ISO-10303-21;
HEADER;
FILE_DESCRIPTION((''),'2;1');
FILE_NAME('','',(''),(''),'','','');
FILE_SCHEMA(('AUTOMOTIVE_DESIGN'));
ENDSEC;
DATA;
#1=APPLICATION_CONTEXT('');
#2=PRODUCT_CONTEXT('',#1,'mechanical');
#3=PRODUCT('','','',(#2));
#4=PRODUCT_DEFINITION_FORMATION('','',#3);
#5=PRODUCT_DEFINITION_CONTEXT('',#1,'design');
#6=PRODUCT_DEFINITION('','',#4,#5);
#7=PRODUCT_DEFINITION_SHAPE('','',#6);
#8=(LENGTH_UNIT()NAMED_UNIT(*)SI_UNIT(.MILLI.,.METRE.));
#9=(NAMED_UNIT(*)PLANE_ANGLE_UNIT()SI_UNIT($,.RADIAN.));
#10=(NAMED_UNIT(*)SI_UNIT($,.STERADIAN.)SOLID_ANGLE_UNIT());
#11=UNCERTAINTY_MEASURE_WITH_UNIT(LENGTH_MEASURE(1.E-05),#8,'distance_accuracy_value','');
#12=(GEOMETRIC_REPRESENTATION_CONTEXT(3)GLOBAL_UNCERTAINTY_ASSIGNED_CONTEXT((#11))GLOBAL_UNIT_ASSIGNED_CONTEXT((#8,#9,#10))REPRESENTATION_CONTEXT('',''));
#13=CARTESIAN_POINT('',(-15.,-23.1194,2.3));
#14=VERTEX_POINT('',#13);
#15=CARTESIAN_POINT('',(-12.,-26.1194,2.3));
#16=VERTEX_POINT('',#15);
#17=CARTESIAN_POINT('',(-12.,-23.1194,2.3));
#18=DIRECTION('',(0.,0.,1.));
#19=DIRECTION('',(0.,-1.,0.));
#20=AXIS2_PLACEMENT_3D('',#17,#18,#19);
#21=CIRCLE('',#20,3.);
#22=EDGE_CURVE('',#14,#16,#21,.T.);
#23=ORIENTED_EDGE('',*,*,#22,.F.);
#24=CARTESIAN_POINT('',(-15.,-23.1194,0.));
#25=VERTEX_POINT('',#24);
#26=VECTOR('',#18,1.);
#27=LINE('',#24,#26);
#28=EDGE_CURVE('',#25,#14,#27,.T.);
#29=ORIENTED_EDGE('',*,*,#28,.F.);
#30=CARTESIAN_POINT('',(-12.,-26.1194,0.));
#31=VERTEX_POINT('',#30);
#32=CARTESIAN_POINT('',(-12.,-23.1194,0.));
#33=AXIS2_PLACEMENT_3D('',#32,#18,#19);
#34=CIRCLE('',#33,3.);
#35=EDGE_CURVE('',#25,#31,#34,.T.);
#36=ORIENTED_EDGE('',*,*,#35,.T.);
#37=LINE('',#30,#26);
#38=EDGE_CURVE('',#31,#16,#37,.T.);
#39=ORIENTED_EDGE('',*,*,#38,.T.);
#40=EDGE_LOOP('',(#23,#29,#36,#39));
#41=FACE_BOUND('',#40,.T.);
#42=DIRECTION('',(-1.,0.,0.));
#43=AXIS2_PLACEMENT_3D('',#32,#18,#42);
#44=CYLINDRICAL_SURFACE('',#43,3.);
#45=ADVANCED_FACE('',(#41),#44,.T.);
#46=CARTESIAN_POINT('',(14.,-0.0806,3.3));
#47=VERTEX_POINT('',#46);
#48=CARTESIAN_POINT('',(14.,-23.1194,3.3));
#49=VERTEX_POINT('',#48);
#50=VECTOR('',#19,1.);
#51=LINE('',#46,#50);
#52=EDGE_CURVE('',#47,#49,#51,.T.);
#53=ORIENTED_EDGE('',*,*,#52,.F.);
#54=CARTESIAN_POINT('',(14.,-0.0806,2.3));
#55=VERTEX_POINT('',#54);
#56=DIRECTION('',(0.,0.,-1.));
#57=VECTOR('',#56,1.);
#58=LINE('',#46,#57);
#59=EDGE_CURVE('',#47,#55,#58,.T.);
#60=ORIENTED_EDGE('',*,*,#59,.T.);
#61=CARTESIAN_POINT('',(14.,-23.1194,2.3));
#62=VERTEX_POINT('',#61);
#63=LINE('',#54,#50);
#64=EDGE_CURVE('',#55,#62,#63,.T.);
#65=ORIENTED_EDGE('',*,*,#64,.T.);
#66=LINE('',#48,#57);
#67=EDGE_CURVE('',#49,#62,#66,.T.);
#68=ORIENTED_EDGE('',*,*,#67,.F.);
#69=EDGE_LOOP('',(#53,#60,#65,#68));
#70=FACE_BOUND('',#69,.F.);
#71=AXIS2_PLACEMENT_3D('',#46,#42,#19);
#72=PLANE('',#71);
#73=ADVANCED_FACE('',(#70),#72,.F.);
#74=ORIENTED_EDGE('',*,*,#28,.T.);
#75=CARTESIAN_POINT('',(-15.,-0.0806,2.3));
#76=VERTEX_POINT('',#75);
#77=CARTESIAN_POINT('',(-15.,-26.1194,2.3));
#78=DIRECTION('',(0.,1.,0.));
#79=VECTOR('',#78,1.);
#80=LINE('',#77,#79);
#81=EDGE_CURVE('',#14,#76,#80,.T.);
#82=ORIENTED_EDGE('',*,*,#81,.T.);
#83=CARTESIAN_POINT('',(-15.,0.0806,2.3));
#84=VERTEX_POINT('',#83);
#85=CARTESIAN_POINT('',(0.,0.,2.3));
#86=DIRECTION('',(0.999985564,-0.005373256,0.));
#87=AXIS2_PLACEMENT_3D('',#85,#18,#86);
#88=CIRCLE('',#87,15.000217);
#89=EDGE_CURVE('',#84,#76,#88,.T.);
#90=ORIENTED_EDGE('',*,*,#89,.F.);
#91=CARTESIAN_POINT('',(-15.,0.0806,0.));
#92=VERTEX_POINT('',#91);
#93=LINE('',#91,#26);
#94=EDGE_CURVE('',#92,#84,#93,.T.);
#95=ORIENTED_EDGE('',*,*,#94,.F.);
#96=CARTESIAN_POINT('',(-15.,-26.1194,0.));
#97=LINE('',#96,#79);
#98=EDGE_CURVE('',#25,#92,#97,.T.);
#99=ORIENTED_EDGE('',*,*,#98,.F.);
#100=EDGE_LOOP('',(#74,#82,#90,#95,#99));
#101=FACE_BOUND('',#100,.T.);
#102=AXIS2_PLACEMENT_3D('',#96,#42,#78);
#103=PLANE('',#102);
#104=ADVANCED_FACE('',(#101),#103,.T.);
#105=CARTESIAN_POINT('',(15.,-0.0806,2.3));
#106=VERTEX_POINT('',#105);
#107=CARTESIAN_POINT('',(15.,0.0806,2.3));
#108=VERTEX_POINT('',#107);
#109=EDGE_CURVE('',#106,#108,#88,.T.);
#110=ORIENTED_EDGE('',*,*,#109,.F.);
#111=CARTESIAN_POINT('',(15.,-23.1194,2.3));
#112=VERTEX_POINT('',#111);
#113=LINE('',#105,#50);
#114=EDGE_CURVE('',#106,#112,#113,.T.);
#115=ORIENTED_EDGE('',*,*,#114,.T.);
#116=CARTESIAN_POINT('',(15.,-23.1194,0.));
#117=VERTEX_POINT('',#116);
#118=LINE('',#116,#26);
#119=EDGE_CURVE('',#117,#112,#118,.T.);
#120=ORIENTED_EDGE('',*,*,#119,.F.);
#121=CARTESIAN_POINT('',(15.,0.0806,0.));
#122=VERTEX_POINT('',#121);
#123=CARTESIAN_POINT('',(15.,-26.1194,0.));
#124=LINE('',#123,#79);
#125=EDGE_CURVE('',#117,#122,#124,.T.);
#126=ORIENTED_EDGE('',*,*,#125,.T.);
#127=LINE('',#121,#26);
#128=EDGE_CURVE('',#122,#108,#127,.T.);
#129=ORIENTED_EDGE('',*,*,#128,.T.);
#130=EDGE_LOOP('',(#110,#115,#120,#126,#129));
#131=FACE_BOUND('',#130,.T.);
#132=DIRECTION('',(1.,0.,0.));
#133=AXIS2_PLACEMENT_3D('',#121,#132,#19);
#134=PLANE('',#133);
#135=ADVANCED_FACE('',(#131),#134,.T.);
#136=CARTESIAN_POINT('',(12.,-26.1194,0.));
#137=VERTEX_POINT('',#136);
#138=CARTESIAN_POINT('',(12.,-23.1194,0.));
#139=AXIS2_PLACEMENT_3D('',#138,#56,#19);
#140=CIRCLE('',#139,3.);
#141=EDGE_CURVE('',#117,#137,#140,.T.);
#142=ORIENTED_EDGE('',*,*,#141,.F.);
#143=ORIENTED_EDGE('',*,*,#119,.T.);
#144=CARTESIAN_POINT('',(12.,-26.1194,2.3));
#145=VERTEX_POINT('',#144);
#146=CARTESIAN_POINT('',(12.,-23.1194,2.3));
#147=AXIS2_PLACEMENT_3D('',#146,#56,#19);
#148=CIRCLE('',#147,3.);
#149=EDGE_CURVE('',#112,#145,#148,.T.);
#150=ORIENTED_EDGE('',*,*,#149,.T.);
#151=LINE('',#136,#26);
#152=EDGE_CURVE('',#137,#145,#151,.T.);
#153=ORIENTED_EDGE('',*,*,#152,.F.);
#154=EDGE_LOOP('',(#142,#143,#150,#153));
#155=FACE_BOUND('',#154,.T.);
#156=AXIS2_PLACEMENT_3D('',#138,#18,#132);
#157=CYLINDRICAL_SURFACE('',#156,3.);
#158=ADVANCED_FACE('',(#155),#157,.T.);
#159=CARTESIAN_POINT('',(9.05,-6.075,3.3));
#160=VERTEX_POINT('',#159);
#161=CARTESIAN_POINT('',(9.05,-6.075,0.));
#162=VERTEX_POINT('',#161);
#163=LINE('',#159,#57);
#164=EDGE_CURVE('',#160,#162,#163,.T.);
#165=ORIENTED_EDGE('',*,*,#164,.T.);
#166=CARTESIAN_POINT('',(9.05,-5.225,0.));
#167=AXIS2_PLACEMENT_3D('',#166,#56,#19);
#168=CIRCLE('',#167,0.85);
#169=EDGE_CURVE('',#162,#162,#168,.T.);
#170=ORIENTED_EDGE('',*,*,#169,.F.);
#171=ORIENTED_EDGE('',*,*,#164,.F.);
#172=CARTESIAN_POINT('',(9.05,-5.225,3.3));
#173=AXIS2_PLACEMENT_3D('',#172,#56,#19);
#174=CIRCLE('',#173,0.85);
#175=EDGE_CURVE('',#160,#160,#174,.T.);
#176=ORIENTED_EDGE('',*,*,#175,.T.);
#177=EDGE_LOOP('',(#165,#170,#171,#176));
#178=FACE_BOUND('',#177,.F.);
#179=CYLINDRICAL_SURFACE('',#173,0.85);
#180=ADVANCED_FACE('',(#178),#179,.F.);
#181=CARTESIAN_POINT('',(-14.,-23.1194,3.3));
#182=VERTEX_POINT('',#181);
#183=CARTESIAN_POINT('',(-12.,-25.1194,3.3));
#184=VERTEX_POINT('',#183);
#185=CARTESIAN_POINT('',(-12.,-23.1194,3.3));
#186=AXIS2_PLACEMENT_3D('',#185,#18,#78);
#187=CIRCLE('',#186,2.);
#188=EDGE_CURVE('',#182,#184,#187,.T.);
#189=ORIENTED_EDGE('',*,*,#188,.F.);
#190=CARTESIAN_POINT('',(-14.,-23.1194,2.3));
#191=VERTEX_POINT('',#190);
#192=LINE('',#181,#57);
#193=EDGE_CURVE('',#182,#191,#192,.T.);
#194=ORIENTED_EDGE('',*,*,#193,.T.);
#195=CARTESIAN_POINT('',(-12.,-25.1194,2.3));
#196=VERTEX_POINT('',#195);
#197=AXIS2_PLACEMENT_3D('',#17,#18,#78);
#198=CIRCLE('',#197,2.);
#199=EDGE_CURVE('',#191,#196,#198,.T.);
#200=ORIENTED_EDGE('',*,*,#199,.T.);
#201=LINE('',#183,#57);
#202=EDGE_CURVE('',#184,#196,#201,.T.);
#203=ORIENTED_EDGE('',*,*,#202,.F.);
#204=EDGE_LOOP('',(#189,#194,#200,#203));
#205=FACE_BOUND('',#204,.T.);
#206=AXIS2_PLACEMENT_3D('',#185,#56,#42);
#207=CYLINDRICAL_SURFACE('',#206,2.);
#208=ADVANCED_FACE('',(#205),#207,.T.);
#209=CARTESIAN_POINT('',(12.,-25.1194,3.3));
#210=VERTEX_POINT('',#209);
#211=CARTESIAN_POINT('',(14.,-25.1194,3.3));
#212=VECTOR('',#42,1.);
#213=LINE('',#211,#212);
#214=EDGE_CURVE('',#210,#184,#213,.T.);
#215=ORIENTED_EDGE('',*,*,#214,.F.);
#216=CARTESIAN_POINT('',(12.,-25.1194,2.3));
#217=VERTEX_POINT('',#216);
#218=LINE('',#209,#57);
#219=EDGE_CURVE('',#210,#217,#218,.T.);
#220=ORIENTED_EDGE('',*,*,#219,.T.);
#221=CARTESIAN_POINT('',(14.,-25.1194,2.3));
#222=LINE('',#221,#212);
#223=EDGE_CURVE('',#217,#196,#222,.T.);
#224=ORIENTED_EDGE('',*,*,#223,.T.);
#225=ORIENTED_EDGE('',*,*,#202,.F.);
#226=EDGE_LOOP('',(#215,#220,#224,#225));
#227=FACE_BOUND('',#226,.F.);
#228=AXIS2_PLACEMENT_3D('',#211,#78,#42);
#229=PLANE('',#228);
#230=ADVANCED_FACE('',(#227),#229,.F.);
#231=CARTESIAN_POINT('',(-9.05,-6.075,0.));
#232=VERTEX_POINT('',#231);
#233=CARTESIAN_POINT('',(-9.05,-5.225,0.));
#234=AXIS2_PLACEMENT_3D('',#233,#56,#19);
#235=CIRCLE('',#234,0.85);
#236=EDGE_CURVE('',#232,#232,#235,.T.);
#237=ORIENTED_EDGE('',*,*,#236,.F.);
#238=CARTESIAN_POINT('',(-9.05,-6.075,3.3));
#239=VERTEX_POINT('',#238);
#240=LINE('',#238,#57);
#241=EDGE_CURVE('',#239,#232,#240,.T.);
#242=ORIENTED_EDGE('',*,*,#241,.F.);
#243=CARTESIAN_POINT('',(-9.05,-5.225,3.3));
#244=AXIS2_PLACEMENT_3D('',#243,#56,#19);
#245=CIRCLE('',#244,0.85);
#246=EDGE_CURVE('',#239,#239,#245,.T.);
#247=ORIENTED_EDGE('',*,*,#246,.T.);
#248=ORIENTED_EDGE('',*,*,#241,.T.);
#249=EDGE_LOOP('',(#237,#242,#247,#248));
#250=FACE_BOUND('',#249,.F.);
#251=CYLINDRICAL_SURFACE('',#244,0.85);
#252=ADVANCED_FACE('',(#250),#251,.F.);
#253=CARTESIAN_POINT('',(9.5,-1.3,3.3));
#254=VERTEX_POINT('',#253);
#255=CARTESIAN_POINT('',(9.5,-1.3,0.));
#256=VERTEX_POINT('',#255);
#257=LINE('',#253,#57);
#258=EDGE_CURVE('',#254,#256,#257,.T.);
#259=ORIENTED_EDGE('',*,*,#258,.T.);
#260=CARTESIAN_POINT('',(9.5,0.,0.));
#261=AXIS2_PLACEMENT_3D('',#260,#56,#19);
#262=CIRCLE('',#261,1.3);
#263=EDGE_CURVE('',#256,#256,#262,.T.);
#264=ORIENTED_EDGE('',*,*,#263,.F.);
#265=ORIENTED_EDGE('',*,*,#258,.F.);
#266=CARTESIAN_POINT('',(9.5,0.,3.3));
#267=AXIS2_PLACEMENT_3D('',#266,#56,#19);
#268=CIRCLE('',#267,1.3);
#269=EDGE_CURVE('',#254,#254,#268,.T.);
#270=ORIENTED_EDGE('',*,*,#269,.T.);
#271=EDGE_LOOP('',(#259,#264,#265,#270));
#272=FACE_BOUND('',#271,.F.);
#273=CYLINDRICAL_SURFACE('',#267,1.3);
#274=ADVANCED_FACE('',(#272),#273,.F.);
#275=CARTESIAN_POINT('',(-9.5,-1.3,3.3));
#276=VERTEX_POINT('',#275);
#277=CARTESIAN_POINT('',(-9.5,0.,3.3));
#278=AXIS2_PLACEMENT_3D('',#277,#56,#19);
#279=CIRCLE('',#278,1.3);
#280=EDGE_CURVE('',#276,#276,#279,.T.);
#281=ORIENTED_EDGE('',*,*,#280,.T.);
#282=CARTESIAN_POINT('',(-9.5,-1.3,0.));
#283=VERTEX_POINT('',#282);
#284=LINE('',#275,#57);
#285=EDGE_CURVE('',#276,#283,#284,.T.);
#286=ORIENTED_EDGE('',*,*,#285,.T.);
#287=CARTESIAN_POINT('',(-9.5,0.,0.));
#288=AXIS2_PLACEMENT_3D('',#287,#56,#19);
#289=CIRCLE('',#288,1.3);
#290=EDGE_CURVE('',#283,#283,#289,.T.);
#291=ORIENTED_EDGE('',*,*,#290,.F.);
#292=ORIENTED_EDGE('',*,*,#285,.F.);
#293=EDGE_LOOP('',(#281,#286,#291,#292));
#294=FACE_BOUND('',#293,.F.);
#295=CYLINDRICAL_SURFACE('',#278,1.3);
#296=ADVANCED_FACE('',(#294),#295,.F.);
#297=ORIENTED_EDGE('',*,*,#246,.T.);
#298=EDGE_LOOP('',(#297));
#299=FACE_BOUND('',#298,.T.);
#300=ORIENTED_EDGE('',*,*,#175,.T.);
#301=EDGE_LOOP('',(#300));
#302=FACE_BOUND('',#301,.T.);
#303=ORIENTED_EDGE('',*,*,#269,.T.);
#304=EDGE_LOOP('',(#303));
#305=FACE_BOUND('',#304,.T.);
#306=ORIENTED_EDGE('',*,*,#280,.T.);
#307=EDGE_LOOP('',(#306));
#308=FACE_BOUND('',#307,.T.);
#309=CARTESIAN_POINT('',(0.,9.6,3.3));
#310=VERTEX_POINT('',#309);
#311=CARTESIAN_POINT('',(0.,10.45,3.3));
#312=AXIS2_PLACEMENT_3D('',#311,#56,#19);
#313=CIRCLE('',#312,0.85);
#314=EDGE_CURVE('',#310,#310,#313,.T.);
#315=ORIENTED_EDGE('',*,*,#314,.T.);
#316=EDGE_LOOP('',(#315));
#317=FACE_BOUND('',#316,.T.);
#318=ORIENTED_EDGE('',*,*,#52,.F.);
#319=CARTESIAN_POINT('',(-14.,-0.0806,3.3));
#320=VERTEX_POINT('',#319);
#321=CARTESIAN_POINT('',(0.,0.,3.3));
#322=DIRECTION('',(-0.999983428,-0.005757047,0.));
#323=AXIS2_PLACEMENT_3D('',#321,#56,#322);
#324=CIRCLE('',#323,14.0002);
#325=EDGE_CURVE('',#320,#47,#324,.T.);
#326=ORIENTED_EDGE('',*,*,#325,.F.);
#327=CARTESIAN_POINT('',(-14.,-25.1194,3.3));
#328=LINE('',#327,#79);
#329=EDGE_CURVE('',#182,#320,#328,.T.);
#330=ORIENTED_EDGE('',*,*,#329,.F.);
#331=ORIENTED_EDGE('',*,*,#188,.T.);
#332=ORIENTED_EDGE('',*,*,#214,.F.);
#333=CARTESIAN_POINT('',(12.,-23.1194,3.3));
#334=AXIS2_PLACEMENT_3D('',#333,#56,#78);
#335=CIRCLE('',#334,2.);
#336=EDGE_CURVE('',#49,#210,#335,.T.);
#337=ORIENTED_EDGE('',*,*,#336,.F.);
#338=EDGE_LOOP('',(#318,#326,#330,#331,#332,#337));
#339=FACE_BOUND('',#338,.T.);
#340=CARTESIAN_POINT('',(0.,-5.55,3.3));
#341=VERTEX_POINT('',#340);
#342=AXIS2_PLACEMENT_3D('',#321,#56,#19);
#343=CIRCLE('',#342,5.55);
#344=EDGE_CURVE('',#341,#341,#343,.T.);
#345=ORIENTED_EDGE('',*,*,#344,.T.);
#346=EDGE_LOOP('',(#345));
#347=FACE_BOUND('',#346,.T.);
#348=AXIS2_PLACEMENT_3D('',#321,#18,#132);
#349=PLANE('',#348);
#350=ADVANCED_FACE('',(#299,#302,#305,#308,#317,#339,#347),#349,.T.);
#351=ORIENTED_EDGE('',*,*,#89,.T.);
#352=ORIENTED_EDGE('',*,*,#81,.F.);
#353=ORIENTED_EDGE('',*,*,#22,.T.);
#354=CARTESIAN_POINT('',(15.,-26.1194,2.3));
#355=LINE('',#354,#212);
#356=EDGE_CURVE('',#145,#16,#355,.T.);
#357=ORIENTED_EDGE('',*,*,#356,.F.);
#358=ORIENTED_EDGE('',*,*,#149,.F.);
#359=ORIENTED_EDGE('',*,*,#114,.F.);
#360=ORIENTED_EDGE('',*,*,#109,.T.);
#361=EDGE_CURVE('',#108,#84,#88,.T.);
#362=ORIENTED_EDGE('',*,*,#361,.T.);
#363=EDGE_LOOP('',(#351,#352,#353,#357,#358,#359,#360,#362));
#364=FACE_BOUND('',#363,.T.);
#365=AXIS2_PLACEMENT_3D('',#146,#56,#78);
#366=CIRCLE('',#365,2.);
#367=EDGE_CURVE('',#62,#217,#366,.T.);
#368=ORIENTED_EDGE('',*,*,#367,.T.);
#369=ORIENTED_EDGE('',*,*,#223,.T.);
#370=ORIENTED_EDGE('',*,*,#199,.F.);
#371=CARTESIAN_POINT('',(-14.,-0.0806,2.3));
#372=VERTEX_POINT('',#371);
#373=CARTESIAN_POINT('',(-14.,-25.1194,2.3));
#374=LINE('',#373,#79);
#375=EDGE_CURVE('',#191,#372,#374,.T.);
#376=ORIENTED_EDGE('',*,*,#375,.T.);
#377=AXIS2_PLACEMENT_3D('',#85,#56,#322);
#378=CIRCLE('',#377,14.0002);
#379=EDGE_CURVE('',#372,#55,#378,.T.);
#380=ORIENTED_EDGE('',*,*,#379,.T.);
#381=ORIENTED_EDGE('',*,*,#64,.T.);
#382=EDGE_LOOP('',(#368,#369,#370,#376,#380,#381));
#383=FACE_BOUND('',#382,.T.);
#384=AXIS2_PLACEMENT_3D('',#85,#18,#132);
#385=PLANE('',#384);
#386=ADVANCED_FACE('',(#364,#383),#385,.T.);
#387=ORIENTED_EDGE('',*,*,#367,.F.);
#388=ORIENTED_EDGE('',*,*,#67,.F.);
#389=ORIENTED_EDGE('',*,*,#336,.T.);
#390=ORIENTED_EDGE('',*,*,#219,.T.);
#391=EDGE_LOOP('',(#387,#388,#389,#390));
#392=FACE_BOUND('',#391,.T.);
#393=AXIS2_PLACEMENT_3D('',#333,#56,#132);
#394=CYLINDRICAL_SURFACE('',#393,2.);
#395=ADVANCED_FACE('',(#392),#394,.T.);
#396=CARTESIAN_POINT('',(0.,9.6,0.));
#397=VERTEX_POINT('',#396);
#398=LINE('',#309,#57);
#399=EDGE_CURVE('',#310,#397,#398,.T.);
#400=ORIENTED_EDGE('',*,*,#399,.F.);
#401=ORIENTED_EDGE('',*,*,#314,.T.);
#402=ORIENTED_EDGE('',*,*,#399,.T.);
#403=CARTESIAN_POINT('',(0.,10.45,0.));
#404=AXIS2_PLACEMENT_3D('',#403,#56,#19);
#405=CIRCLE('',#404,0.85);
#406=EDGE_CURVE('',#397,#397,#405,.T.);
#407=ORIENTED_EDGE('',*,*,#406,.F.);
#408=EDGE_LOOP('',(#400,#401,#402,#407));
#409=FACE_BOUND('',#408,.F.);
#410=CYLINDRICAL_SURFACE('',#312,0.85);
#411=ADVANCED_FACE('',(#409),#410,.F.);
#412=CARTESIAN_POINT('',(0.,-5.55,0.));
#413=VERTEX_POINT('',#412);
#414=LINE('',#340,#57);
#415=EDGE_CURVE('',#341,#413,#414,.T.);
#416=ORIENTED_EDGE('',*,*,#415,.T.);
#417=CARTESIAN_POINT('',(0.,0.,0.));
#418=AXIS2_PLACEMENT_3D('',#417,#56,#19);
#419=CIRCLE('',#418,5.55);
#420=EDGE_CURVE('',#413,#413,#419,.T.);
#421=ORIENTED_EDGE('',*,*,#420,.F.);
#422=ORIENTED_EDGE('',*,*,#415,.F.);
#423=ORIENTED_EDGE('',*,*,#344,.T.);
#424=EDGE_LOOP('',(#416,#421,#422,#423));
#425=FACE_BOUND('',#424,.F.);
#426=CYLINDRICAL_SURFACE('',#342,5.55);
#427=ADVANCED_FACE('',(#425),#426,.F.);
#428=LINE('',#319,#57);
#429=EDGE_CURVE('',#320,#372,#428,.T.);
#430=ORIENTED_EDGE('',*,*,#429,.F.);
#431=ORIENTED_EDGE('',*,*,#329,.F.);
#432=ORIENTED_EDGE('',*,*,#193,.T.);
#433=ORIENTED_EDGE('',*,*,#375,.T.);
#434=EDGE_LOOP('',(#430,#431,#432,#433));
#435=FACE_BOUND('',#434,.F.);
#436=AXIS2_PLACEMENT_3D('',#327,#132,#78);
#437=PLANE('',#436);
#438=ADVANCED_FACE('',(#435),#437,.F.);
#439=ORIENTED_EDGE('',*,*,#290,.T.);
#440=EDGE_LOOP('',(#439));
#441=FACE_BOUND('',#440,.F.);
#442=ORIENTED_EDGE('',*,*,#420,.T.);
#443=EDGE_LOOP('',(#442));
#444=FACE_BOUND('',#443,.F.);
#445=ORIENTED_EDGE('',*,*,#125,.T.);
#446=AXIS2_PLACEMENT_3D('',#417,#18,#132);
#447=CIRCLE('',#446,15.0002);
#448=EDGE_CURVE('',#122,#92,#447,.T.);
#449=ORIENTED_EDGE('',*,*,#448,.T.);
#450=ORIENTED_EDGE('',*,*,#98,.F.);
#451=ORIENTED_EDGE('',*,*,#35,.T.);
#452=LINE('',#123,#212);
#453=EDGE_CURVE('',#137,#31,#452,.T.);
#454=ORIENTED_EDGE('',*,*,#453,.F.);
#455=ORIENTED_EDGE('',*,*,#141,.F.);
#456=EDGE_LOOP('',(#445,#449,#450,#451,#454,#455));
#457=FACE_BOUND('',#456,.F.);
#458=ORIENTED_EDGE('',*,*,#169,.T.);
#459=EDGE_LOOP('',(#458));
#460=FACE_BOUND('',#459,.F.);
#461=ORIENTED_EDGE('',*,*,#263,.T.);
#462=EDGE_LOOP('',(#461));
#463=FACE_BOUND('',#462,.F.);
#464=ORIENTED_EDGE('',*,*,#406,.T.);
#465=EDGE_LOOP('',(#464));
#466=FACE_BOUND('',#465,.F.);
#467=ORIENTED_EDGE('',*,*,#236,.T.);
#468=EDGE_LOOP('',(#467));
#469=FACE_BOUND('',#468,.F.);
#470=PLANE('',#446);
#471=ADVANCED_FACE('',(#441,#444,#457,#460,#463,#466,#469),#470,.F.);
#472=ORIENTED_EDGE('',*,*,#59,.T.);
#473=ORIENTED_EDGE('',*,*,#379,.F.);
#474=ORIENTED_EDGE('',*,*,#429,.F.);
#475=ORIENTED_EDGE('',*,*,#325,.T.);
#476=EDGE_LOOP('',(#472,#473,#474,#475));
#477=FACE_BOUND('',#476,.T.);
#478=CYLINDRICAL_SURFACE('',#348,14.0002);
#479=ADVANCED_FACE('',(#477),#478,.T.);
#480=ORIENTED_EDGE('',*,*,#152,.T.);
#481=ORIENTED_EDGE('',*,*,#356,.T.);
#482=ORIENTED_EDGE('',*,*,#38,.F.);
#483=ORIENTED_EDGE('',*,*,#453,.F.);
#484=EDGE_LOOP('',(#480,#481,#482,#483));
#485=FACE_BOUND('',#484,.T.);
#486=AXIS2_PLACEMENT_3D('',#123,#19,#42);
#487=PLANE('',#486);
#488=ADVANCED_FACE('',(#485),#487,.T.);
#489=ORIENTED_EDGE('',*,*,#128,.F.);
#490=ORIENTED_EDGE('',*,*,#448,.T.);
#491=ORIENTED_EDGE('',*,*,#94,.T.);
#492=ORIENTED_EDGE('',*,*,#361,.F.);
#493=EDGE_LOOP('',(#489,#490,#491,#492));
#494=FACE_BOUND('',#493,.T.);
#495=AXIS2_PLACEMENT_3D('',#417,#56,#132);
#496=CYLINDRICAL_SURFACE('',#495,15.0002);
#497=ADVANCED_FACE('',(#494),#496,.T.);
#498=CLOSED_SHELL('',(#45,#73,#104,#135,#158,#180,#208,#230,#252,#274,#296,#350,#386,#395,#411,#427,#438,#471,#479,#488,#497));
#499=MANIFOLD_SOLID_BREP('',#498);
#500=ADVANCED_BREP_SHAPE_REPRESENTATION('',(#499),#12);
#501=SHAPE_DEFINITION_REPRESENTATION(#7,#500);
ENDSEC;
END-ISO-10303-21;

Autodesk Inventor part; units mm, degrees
ref_plane "YZ Plane" through (0, 0, 0) normal (1, 0, 0) x (0, 1, 0)
ref_plane "XZ Plane" through (0, 0, 0) normal (0, 1, 0) x (-1, 0, 0)
ref_plane "XY Plane" through (0, 0, 0) normal (0, 0, 1) x (1, 0, 0)
sketch "スケッチ1" plane through (0, 0, 0) normal (0, 0, 1) x (1, 0, 0)
  line L0 (-15, 0.0806) -> (15, 0.0806)
  line L1 (15, 0.0806) -> (15, -26.1194)
  line L2 (15, -26.1194) -> (-15, -26.1194)
  line L3 (-15, -26.1194) -> (-15, 0.0806)
  circle A0 centre (0, 0) radius 15.0002
  dimension "d0" = 30
  dimension "d1" = 15
  dimension "d2" = 26.2
extrude "押し出し1" add sketch "スケッチ1" along normal blind 3.3
sketch "スケッチ2" plane through (0, 0, 3.3) normal (0, 0, 1) x (1, 0, 0)
  arc A0 (15, -0.0806) -> (-15, -0.0806) centre (0, 0) ccw projected
  circle A1 centre (0, 0) radius 9.5
  point P0 (-9.5, 0)
  point P1 (9.5, 0)
  dimension "d5" = 19
hole "Hole1" at (-9.5, 0, 3.3) at (9.5, 0, 3.3) direction (0, 0, -1) diameter 2.6 depth 10
sketch "スケッチ3" plane through (0, 0, 3.3) normal (0, 0, 1) x (1, 0, 0)
  arc A0 (15, -0.0806) -> (-15, -0.0806) centre (0, 0) ccw projected
hole "Hole2" at (0, 0, 3.3) direction (0, 0, -1) diameter 11.1 depth 10 tip angle 118
sketch "スケッチ4" plane through (0, 0, 3.3) normal (0, 0, 1) x (1, 0, 0)
  arc A0 (15, -0.0806) -> (-15, -0.0806) centre (0, 0) ccw projected
  line L0 (-15, -26.1194) -> (-15, -0.0806) projected
  line L1 (15, -26.1194) -> (-15, -26.1194) projected
  line L2 (15, -0.0806) -> (15, -26.1194) projected
  line L3 (-14, -0.0806) -> (14, -0.0806)
  line L4 (14, -0.0806) -> (14, -25.1194)
  line L5 (14, -25.1194) -> (-14, -25.1194)
  line L6 (-14, -25.1194) -> (-14, -0.0806)
  circle A1 centre (0, 0) radius 14.0002
  dimension "d20" = 1
  dimension "d21" = 1
  dimension "d22" = 1
extrude "押し出し2" cut sketch "スケッチ4" against normal blind 1
fillet "フィレット1" radius 3 2 edges at (15, -26.1194, 1.15) (-15, -26.1194, 1.15)
fillet "フィレット2" radius 2 2 edges at (14, -25.1194, 2.8) (-14, -25.1194, 2.8)
sketch "スケッチ5" plane through (0, 0, 3.3) normal (0, 0, 1) x (1, 0, 0)
  circle A0 centre (0, 0) radius 5.55 projected
  circle A1 centre (0, 0) radius 10.45
  point P0 (0, 10.45)
  point P1 (-9.05, -5.225)
  point P2 (9.05, -5.225)
  dimension "d27" = 20.9
  dimension "d30" = 360
hole "Hole3" at (0, 10.45, 3.3) at (-9.05, -5.225, 3.3) at (9.05, -5.225, 3.3) direction (0, 0, -1) diameter 1.7 end through all
equation "\"d1\" = 0.5 * d0"
equation "\"d22\" = d21"
properties part number "HEDS-5500_A"
